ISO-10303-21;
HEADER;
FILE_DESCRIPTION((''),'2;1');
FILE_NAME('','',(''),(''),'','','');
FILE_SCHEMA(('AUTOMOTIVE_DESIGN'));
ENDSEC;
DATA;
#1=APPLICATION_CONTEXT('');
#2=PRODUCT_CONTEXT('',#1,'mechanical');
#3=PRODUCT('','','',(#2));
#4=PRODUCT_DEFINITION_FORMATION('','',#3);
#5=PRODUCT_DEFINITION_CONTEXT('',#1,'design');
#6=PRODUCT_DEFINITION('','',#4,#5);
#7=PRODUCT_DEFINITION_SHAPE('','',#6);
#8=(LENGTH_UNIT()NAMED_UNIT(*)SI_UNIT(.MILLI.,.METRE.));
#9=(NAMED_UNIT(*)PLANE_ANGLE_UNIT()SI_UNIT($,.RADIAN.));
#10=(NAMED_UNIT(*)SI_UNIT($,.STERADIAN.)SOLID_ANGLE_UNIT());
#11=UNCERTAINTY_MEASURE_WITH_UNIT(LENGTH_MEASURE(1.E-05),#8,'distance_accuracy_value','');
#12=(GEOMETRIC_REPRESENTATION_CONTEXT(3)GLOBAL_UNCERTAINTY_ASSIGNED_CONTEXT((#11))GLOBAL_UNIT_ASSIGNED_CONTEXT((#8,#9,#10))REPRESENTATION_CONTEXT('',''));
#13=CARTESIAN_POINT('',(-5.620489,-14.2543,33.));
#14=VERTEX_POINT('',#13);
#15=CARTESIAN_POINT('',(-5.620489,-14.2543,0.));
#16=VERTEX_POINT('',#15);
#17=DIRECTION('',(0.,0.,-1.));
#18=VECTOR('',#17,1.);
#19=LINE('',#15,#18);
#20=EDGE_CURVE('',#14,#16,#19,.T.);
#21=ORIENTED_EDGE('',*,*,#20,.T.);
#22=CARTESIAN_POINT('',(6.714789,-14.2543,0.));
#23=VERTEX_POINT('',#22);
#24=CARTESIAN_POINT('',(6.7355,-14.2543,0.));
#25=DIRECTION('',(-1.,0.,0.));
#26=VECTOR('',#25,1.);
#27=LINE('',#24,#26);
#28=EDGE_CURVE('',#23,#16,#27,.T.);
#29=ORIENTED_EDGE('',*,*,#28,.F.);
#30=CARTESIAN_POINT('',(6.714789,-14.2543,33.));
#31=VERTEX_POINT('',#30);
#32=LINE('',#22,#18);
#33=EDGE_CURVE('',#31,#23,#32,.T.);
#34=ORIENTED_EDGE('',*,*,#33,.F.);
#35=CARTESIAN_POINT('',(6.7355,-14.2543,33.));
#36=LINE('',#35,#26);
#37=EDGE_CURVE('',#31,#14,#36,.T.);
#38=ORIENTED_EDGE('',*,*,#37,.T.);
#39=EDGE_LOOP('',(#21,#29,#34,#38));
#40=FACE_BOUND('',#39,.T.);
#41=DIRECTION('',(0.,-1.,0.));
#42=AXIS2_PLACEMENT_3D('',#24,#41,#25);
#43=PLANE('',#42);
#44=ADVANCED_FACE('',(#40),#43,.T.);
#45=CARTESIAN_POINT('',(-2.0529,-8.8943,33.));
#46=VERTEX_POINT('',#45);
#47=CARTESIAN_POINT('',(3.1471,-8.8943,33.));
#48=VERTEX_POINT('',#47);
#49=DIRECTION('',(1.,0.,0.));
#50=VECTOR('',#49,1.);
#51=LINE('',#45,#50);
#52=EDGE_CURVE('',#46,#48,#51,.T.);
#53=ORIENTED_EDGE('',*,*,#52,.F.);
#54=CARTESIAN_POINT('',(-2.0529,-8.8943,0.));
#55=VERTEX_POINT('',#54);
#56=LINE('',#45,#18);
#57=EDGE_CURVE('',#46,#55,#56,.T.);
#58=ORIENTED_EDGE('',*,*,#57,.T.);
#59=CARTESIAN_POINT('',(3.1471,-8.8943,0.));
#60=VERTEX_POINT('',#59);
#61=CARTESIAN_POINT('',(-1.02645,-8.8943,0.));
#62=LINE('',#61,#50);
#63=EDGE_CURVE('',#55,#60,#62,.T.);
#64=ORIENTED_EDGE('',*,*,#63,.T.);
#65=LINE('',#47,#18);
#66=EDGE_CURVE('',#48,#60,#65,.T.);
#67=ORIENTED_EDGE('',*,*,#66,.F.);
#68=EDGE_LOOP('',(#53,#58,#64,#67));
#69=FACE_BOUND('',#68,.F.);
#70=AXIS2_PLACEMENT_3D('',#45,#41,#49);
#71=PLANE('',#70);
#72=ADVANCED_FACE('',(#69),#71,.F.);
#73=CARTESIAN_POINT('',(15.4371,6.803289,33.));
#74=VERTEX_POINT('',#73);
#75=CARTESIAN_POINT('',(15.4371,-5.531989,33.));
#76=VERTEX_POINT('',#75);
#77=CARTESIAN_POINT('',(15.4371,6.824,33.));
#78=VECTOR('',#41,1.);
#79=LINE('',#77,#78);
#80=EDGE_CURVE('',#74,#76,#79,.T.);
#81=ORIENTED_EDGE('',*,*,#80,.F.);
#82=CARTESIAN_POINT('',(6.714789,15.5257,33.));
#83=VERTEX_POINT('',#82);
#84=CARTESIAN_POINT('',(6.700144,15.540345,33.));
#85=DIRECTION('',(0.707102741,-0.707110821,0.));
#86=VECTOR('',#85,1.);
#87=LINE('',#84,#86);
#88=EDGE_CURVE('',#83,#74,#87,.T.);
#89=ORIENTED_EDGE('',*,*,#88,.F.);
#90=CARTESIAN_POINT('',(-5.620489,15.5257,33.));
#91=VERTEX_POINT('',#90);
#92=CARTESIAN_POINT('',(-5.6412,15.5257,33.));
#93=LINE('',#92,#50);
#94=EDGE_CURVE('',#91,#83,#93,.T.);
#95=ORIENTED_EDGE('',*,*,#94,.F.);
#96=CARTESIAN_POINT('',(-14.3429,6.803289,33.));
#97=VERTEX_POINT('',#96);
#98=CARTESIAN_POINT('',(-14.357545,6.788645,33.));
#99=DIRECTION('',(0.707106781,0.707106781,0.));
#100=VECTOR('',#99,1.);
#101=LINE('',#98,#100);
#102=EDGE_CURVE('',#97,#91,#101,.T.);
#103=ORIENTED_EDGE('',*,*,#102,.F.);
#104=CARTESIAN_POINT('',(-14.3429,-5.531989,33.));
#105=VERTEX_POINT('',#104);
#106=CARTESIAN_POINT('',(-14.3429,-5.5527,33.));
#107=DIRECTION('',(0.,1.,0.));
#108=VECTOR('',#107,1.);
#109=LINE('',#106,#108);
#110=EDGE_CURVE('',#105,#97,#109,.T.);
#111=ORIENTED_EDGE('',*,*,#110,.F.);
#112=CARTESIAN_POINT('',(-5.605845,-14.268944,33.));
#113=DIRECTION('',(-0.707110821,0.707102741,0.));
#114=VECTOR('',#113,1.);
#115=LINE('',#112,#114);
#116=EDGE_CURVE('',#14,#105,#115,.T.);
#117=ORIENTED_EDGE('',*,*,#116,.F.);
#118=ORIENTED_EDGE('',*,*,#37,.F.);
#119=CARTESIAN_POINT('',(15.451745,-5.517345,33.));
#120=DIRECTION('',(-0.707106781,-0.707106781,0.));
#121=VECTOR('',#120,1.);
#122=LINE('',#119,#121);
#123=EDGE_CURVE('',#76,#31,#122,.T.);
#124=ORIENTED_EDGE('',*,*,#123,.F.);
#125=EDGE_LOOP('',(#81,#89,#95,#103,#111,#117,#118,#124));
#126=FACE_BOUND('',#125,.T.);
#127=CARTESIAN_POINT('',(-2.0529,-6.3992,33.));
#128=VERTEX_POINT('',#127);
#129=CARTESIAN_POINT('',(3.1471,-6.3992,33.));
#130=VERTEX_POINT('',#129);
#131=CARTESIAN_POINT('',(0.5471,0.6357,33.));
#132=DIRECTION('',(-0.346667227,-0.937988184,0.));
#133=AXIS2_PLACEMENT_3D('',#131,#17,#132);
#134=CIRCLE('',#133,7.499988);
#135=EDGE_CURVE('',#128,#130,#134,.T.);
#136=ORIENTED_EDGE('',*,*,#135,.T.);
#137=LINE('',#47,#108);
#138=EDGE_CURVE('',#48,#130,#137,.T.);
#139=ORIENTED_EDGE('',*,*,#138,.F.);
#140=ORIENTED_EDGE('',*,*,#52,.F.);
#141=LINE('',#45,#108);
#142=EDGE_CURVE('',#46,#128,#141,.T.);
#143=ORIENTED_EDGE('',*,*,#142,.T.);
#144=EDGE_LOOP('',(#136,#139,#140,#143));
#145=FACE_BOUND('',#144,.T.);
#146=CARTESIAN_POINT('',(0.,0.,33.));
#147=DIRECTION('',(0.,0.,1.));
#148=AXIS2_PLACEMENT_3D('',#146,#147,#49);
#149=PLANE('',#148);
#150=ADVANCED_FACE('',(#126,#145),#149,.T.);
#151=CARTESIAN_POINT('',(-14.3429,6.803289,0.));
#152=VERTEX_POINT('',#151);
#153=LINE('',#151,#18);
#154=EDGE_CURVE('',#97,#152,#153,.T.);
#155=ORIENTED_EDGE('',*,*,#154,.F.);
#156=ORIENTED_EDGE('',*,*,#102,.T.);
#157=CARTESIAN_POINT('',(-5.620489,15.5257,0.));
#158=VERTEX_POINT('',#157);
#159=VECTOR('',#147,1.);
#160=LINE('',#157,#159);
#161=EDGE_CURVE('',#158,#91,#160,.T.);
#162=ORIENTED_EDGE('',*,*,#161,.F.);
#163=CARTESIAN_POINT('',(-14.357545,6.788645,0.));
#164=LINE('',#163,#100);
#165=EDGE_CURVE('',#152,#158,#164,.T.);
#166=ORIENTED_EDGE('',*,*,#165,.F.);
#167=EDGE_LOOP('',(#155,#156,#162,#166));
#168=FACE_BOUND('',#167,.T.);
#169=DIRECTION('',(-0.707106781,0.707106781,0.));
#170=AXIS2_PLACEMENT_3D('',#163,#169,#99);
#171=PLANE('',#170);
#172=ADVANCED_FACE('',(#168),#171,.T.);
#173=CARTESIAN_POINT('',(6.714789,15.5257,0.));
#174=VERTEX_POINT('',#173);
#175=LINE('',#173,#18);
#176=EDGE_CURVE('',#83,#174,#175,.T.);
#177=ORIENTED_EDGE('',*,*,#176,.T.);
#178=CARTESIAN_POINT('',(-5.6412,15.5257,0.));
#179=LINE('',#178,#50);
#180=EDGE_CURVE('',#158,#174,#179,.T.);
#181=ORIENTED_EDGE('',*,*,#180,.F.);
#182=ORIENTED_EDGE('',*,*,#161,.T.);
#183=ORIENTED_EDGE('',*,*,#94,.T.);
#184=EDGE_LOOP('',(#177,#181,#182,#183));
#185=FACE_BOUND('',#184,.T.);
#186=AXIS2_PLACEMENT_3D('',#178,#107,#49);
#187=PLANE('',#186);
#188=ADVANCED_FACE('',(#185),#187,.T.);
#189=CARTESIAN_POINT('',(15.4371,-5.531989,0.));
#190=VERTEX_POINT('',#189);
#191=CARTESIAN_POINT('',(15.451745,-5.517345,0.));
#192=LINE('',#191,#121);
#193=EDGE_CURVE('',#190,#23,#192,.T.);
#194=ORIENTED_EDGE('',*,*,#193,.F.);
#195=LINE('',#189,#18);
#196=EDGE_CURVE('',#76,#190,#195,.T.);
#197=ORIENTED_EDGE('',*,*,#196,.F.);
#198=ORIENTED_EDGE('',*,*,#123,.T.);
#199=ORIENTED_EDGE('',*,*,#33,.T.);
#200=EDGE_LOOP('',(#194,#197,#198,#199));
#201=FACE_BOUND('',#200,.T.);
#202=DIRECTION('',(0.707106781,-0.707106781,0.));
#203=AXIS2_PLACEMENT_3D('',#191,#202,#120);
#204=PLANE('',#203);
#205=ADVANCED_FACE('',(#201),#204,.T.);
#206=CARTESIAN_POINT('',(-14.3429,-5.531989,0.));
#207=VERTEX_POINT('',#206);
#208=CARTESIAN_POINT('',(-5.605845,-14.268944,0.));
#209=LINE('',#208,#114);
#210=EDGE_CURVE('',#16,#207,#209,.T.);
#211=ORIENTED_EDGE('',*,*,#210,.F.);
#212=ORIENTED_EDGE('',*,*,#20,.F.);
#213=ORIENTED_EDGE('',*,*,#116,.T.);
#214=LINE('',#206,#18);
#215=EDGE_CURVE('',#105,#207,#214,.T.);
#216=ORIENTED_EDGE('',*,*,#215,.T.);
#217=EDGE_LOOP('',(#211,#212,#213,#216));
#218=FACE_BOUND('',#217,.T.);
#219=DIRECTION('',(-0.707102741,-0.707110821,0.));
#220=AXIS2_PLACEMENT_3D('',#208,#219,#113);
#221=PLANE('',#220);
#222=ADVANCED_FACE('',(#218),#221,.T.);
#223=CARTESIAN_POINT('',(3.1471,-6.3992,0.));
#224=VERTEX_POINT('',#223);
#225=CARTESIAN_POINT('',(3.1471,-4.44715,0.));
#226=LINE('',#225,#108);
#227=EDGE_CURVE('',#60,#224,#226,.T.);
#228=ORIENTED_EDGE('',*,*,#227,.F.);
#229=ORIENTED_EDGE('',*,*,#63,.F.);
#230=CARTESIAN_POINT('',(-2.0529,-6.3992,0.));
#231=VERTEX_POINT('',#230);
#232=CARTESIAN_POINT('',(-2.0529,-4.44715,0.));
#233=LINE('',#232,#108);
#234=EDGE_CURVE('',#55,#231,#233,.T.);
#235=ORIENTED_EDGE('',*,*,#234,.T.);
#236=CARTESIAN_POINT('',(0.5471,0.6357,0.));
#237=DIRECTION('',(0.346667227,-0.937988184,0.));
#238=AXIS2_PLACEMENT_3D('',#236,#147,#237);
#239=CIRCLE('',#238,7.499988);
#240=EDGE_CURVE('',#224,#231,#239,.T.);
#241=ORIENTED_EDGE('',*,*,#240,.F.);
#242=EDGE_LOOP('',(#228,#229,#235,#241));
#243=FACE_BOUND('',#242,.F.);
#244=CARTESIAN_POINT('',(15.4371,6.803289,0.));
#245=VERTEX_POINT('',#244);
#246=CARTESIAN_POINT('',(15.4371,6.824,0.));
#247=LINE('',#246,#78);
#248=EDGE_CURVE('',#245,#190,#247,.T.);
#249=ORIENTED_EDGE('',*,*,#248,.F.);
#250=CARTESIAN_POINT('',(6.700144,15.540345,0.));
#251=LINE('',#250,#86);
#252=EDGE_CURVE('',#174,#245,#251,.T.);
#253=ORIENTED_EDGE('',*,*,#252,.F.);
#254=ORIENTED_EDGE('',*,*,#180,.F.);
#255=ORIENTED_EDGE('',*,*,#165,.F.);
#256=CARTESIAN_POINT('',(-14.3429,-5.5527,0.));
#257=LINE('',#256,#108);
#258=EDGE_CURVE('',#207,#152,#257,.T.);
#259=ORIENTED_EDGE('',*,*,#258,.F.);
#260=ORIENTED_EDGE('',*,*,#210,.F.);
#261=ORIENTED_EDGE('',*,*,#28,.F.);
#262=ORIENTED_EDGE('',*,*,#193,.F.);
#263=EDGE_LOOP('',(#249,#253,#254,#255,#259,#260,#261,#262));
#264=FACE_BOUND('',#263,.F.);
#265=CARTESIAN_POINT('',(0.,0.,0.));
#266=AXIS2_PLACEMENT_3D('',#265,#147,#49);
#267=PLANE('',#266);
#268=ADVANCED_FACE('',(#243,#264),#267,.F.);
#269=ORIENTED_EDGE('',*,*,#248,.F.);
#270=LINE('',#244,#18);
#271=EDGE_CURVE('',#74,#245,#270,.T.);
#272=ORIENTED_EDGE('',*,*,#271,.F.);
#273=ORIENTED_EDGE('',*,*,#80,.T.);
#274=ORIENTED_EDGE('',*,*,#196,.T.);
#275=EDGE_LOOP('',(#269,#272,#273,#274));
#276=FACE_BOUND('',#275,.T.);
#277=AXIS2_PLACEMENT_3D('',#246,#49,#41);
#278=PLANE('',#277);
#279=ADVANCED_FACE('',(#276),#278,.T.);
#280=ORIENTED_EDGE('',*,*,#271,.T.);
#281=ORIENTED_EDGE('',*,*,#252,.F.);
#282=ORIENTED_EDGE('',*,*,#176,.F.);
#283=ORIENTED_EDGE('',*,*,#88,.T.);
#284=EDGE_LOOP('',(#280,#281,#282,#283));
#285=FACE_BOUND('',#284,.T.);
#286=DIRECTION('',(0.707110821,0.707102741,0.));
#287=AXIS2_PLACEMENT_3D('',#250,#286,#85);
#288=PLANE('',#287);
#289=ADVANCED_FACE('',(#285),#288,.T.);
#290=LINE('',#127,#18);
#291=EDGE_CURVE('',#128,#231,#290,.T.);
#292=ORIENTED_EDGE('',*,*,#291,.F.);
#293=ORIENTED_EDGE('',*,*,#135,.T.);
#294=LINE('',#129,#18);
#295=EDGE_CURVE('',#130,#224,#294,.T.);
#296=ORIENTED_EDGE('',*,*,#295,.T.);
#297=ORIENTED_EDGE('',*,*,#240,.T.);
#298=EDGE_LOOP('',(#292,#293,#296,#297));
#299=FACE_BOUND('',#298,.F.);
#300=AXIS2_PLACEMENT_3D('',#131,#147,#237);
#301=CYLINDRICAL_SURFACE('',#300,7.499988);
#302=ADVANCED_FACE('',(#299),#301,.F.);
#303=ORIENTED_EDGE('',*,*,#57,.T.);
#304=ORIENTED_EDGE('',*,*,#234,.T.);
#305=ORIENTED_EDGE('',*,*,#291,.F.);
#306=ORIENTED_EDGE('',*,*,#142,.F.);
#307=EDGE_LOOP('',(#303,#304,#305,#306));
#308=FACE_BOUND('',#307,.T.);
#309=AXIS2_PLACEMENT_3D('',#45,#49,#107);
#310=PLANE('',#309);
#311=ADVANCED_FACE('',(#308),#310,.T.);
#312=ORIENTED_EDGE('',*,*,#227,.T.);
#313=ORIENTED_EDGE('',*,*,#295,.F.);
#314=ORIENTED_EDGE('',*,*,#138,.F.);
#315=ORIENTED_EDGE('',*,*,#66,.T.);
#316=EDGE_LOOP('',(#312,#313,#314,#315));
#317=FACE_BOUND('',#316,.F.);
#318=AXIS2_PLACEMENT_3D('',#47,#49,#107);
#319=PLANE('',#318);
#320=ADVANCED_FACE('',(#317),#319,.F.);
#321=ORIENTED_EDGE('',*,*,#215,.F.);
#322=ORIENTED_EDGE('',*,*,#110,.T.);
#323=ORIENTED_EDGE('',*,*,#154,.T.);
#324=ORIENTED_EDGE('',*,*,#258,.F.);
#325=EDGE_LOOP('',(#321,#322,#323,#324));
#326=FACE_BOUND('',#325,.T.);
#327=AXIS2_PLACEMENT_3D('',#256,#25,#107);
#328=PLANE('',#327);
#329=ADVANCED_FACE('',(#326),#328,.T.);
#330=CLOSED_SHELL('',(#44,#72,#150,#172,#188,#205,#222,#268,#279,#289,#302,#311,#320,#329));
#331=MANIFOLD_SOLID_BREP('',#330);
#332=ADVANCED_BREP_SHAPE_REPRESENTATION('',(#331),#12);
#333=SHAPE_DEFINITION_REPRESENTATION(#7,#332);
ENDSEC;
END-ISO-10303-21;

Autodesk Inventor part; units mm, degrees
ref_plane "YZ Plane" through (0, 0, 0) normal (1, 0, 0) x (0, 1, 0)
ref_plane "XZ Plane" through (0, 0, 0) normal (0, 1, 0) x (-1, 0, 0)
ref_plane "XY Plane" through (0, 0, 0) normal (0, 0, 1) x (1, 0, 0)
sketch "Sketch1" plane through (0, 0, 0) normal (0, 0, 1) x (1, 0, 0)
  circle A0 centre (-19.4529, 0.6357) radius 3.1
  circle A1 centre (0.5471, -19.3643) radius 3.1
  circle A2 centre (20.5471, 0.6357) radius 3.1
  circle A3 centre (-13.595, 14.7778) radius 3.1
  line L0 (15.4871, -5.5527) -> (6.7355, -14.3043)
  line L1 (6.7355, -14.3043) -> (-5.6412, -14.3043)
  line L2 (-5.6412, -14.3043) -> (-14.3929, -5.5527)
  line L3 (-14.3929, -5.5527) -> (-14.3929, 6.824)
  line L4 (-14.3929, 6.824) -> (-5.6412, 15.5757)
  line L5 (-5.6412, 15.5757) -> (6.7355, 15.5757)
  line L6 (6.7355, 15.5757) -> (15.4871, 6.824)
  line L7 (15.4871, 6.824) -> (15.4871, -5.5527)
  circle A4 centre (14.6893, 14.7778) radius 3.1
  circle A5 centre (14.6893, -13.5064) radius 3.1
  circle A6 centre (-13.595, -13.5064) radius 3.1
  arc A7 (-10.3042, 22.9357) -> (11.3984, 22.9357) centre (0.5471, 0.6357) ccw
  line L8 (-10.3042, 22.9357) -> (11.3984, 22.9357)
  point P0 (0, 0)
extrude "Extrusion1" add sketch "Sketch1" along normal blind 33 contours L0 L1 L2 L3 L4 L5 L6 L7
sketch "Sketch2" plane through (0, 0, 33) normal (0, 0, 1) x (1, 0, 0)
  arc A0 (3.1471, -6.3992) -> (-2.0529, -6.3992) centre (0.5471, 0.6357) ccw
  line L0 (3.1471, -8.8943) -> (3.1471, -6.3992)
  line L1 (-2.0529, -8.8943) -> (3.1471, -8.8943)
  line L2 (-2.0529, -8.8943) -> (-2.0529, -6.3992)
  line L3 (0.5471, 0.6357) -> (-14.3929, 0.6357)
  line L4 (-14.3929, 6.824) -> (-14.3929, -5.5527) projected
  line L5 (0.5471, 0.6357) -> (15.4871, 0.6357)
  line L6 (15.4871, -5.5527) -> (15.4871, 6.824) projected
  line L7 (0.5471, 0.6357) -> (0.5471, 15.5757)
  line L8 (6.7355, 15.5757) -> (-5.6412, 15.5757) projected
  point P0 (0, 0)
  point P1 (0.5471, 0.6357)
  point P2 (1.7246, 0.9714)
  dimension "d2" = 7.5
  dimension "d3" = 5.2
  dimension "d4" = 2.4951
  dimension "d5" = 2.6
extrude "Extrusion2" cut sketch "Sketch2" against normal through all
thicken "Thicken1" operation cut thickness 0.05 both sides no extend neighbours no toward (0, -1, 0) faces at (2.6099, 15.5757, 11) (12.5699, 9.7413, 22) (15.4871, -1.4271, 11) (9.6527, -11.3871, 11) (-1.5157, -14.3043, 11) (-11.4757, -8.4699, 11) (-14.3929, 2.6985, 11) (-8.5585, 12.6585, 11)
sketch "Sketch3" plane through (0, 0, 33) normal (0, 0, 1) x (1, 0, 0)
  line L0 (6.7148, -14.2543) -> (15.4371, -5.5319) projected
  line L1 (15.4371, -5.5319) -> (15.4371, 6.8033) projected
  line L2 (15.4371, 6.8033) -> (6.7148, 15.5257) projected
  line L3 (6.7148, 15.5257) -> (-5.6205, 15.5257) projected
  line L4 (-5.6205, 15.5257) -> (-14.3429, 6.8033) projected
  line L5 (-14.3429, 6.8033) -> (-14.3429, -5.5319) projected
  line L6 (-14.3429, -5.5319) -> (-5.6205, -14.2543) projected
  line L7 (-5.6205, -14.2543) -> (6.7148, -14.2543) projected
  line L8 (-2.0529, -8.8943) -> (-2.0529, -6.3992) projected
  arc A0 (3.1471, -6.3992) -> (-2.0529, -6.3992) centre (0.5471, 0.6357) ccw projected
  line L9 (3.1471, -6.3992) -> (3.1471, -8.8943) projected
  line L10 (3.1471, -8.8943) -> (-2.0529, -8.8943) projected
  point P0 (0, 0)
properties part number "spool_keyway"
